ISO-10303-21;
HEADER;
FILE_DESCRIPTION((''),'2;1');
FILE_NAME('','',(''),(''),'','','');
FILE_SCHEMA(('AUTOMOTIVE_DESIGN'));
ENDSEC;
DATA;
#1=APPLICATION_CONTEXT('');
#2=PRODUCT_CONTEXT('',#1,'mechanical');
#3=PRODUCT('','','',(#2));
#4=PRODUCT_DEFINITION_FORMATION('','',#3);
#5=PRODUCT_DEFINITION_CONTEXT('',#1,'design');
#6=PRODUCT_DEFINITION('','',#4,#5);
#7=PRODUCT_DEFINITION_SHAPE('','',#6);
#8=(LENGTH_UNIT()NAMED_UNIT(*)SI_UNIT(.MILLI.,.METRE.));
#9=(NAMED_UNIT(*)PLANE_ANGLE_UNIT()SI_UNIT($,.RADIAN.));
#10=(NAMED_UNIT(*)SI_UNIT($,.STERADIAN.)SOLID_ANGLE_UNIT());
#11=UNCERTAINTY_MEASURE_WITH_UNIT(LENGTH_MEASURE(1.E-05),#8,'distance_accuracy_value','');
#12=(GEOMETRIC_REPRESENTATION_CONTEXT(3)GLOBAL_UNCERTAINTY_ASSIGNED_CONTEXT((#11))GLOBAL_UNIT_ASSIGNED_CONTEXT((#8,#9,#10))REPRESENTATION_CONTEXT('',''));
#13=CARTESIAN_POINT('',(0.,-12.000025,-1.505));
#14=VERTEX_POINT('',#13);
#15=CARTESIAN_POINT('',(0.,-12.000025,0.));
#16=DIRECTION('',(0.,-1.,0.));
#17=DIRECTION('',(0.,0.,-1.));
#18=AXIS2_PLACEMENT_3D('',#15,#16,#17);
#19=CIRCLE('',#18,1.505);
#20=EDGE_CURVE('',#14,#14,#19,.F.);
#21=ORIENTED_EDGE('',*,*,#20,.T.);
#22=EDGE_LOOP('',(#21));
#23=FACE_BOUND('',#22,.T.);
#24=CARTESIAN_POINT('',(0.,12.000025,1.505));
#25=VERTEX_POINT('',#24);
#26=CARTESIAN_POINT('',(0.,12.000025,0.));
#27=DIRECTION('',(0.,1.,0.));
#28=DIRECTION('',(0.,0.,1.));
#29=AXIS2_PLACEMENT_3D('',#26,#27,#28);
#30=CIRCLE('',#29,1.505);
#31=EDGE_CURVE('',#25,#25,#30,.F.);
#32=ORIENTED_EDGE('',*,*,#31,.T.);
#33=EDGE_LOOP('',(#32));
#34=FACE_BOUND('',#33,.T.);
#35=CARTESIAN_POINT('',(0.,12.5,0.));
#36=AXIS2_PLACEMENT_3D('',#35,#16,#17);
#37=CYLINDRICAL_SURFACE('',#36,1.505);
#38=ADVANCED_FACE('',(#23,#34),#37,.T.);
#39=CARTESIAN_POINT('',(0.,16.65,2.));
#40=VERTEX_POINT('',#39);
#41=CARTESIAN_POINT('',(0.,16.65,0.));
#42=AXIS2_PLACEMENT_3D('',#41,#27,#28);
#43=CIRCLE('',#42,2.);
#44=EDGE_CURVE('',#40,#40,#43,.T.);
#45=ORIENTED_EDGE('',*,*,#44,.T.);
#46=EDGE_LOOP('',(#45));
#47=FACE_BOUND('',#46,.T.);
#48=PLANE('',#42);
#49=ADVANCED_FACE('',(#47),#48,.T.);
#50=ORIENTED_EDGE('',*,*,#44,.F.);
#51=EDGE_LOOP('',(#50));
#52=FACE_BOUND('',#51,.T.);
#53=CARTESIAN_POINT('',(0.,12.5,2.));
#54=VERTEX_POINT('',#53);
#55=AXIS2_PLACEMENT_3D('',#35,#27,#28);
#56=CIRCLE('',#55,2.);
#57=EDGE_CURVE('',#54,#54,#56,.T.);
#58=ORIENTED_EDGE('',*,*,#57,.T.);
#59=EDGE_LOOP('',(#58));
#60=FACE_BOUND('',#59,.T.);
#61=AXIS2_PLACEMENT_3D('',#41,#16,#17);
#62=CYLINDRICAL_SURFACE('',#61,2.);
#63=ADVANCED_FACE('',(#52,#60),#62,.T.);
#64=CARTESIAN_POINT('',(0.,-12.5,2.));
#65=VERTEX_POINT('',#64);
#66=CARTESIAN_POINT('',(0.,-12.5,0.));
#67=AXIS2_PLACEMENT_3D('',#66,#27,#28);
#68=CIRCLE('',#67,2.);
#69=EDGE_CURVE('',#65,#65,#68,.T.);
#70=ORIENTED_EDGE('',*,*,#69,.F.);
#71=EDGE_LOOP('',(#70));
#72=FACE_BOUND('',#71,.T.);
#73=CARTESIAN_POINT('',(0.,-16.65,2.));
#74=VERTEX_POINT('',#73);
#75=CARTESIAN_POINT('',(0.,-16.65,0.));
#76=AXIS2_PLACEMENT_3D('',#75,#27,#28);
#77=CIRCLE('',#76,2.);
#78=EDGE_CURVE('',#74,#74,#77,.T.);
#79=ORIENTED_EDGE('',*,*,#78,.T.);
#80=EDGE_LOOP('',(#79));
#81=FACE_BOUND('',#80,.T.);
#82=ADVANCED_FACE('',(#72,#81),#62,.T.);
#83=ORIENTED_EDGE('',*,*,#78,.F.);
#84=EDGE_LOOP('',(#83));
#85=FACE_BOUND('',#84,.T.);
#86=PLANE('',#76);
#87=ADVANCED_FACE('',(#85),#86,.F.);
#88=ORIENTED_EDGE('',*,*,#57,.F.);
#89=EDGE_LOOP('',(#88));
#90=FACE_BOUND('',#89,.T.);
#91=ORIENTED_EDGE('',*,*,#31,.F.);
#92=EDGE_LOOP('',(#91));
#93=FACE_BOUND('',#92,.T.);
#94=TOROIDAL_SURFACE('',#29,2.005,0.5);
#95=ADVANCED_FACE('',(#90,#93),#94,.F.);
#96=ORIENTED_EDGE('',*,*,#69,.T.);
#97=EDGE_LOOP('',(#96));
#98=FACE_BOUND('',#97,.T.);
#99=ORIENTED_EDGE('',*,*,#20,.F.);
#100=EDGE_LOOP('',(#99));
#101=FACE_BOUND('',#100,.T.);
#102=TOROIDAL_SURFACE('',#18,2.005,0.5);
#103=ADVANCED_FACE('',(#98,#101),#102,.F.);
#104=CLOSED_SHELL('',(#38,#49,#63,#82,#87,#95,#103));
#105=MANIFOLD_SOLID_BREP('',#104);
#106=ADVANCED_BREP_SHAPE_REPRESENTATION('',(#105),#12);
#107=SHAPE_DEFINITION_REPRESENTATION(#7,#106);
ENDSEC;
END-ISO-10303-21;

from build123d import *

# Parameters (mm, degrees)
CROQUIS1_R                 = 2
SALIENTE_EXTRUIR1_DEPTH    = 16.65
CORTAR_EXTRUIR1_DEPTH      = 12.5
CORTAR_EXTRUIR1_DEPTH_BACK = 12.5
CROQUIS2_R                 = 2
CROQUIS2_R_2               = 1.505
REDONDEO1_R                = 0.5
REDONDEO2_R                = 0.5


with BuildPart() as part:
    # Croquis1 → Saliente-Extruir1 (new, symmetric)
    with BuildSketch(Plane(origin=(0, 0, 0), x_dir=(1, 0, 0), z_dir=(0, 1, 0))):
        with Locations(Location((0, 0, 0), (0, 0, 270))):
            Circle(CROQUIS1_R)
    extrude(amount=SALIENTE_EXTRUIR1_DEPTH, both=True)

    # Croquis2 → Cortar-Extruir1 (cut, two sides: drawn at the far end of the back side and taken through both)
    with BuildSketch(Plane(origin=(0, 0, 0), x_dir=(1, 0, 0), z_dir=(0, 1, 0)).offset(-CORTAR_EXTRUIR1_DEPTH_BACK)):
        with Locations(Location((0, 0, 0), (0, 0, 270))):
            Circle(CROQUIS2_R)
        with Locations(Location((0, 0, 0), (0, 0, 270))):
            Circle(CROQUIS2_R_2, mode=Mode.SUBTRACT)
    extrude(amount=CORTAR_EXTRUIR1_DEPTH + CORTAR_EXTRUIR1_DEPTH_BACK, mode=Mode.SUBTRACT)

    # Redondeo1
    # the kernel refuses this fillet: 0.5 mm, written as the material it adds along each edge
    with BuildSketch(Plane(origin=(0, -12.5, 0), x_dir=(0, 0, 1), z_dir=(-1, 0, 0))) as redondeo1_piece_1_section:
        with BuildLine():
            CenterArc((1.505 + REDONDEO1_R, REDONDEO1_R), REDONDEO1_R, 180, 90)
            Line((1.505, REDONDEO1_R), (1.505, 0))
            Line((1.505, 0), (1.505 + REDONDEO1_R, 0))
        make_face()
    redondeo1_piece_1 = revolve(axis=Axis((0, -12.5, 0), (0, 1, 0)), mode=Mode.PRIVATE)
    redondeo1_piece_1 = redondeo1_piece_1 & Plane(origin=(0, -12.357868044, 0), x_dir=(0, 0, 1), z_dir=(0, 1, 0)) * Cylinder(2, 9, mode=Mode.PRIVATE)
    add(redondeo1_piece_1)

    # Redondeo2
    # the kernel refuses this fillet: 0.5 mm, written as the material it adds along each edge
    with BuildSketch(Plane(origin=(0, 12.5, 0), x_dir=(0, 0, 1), z_dir=(-1, 0, 0))) as redondeo2_piece_1_section:
        with BuildLine():
            CenterArc((1.505 + REDONDEO2_R, -REDONDEO2_R), REDONDEO2_R, 90, 90)
            Line((1.505 + REDONDEO2_R, 0), (1.505, 0))
            Line((1.505, 0), (1.505, -REDONDEO2_R))
        make_face()
    redondeo2_piece_1 = revolve(axis=Axis((0, 12.5, 0), (0, 1, 0)), mode=Mode.PRIVATE)
    redondeo2_piece_1 = redondeo2_piece_1 & Plane(origin=(0, 12.357868044, 0), x_dir=(0, 0, 1), z_dir=(0, 1, 0)) * Cylinder(2, 9, mode=Mode.PRIVATE)
    add(redondeo2_piece_1)


solid = part.part
